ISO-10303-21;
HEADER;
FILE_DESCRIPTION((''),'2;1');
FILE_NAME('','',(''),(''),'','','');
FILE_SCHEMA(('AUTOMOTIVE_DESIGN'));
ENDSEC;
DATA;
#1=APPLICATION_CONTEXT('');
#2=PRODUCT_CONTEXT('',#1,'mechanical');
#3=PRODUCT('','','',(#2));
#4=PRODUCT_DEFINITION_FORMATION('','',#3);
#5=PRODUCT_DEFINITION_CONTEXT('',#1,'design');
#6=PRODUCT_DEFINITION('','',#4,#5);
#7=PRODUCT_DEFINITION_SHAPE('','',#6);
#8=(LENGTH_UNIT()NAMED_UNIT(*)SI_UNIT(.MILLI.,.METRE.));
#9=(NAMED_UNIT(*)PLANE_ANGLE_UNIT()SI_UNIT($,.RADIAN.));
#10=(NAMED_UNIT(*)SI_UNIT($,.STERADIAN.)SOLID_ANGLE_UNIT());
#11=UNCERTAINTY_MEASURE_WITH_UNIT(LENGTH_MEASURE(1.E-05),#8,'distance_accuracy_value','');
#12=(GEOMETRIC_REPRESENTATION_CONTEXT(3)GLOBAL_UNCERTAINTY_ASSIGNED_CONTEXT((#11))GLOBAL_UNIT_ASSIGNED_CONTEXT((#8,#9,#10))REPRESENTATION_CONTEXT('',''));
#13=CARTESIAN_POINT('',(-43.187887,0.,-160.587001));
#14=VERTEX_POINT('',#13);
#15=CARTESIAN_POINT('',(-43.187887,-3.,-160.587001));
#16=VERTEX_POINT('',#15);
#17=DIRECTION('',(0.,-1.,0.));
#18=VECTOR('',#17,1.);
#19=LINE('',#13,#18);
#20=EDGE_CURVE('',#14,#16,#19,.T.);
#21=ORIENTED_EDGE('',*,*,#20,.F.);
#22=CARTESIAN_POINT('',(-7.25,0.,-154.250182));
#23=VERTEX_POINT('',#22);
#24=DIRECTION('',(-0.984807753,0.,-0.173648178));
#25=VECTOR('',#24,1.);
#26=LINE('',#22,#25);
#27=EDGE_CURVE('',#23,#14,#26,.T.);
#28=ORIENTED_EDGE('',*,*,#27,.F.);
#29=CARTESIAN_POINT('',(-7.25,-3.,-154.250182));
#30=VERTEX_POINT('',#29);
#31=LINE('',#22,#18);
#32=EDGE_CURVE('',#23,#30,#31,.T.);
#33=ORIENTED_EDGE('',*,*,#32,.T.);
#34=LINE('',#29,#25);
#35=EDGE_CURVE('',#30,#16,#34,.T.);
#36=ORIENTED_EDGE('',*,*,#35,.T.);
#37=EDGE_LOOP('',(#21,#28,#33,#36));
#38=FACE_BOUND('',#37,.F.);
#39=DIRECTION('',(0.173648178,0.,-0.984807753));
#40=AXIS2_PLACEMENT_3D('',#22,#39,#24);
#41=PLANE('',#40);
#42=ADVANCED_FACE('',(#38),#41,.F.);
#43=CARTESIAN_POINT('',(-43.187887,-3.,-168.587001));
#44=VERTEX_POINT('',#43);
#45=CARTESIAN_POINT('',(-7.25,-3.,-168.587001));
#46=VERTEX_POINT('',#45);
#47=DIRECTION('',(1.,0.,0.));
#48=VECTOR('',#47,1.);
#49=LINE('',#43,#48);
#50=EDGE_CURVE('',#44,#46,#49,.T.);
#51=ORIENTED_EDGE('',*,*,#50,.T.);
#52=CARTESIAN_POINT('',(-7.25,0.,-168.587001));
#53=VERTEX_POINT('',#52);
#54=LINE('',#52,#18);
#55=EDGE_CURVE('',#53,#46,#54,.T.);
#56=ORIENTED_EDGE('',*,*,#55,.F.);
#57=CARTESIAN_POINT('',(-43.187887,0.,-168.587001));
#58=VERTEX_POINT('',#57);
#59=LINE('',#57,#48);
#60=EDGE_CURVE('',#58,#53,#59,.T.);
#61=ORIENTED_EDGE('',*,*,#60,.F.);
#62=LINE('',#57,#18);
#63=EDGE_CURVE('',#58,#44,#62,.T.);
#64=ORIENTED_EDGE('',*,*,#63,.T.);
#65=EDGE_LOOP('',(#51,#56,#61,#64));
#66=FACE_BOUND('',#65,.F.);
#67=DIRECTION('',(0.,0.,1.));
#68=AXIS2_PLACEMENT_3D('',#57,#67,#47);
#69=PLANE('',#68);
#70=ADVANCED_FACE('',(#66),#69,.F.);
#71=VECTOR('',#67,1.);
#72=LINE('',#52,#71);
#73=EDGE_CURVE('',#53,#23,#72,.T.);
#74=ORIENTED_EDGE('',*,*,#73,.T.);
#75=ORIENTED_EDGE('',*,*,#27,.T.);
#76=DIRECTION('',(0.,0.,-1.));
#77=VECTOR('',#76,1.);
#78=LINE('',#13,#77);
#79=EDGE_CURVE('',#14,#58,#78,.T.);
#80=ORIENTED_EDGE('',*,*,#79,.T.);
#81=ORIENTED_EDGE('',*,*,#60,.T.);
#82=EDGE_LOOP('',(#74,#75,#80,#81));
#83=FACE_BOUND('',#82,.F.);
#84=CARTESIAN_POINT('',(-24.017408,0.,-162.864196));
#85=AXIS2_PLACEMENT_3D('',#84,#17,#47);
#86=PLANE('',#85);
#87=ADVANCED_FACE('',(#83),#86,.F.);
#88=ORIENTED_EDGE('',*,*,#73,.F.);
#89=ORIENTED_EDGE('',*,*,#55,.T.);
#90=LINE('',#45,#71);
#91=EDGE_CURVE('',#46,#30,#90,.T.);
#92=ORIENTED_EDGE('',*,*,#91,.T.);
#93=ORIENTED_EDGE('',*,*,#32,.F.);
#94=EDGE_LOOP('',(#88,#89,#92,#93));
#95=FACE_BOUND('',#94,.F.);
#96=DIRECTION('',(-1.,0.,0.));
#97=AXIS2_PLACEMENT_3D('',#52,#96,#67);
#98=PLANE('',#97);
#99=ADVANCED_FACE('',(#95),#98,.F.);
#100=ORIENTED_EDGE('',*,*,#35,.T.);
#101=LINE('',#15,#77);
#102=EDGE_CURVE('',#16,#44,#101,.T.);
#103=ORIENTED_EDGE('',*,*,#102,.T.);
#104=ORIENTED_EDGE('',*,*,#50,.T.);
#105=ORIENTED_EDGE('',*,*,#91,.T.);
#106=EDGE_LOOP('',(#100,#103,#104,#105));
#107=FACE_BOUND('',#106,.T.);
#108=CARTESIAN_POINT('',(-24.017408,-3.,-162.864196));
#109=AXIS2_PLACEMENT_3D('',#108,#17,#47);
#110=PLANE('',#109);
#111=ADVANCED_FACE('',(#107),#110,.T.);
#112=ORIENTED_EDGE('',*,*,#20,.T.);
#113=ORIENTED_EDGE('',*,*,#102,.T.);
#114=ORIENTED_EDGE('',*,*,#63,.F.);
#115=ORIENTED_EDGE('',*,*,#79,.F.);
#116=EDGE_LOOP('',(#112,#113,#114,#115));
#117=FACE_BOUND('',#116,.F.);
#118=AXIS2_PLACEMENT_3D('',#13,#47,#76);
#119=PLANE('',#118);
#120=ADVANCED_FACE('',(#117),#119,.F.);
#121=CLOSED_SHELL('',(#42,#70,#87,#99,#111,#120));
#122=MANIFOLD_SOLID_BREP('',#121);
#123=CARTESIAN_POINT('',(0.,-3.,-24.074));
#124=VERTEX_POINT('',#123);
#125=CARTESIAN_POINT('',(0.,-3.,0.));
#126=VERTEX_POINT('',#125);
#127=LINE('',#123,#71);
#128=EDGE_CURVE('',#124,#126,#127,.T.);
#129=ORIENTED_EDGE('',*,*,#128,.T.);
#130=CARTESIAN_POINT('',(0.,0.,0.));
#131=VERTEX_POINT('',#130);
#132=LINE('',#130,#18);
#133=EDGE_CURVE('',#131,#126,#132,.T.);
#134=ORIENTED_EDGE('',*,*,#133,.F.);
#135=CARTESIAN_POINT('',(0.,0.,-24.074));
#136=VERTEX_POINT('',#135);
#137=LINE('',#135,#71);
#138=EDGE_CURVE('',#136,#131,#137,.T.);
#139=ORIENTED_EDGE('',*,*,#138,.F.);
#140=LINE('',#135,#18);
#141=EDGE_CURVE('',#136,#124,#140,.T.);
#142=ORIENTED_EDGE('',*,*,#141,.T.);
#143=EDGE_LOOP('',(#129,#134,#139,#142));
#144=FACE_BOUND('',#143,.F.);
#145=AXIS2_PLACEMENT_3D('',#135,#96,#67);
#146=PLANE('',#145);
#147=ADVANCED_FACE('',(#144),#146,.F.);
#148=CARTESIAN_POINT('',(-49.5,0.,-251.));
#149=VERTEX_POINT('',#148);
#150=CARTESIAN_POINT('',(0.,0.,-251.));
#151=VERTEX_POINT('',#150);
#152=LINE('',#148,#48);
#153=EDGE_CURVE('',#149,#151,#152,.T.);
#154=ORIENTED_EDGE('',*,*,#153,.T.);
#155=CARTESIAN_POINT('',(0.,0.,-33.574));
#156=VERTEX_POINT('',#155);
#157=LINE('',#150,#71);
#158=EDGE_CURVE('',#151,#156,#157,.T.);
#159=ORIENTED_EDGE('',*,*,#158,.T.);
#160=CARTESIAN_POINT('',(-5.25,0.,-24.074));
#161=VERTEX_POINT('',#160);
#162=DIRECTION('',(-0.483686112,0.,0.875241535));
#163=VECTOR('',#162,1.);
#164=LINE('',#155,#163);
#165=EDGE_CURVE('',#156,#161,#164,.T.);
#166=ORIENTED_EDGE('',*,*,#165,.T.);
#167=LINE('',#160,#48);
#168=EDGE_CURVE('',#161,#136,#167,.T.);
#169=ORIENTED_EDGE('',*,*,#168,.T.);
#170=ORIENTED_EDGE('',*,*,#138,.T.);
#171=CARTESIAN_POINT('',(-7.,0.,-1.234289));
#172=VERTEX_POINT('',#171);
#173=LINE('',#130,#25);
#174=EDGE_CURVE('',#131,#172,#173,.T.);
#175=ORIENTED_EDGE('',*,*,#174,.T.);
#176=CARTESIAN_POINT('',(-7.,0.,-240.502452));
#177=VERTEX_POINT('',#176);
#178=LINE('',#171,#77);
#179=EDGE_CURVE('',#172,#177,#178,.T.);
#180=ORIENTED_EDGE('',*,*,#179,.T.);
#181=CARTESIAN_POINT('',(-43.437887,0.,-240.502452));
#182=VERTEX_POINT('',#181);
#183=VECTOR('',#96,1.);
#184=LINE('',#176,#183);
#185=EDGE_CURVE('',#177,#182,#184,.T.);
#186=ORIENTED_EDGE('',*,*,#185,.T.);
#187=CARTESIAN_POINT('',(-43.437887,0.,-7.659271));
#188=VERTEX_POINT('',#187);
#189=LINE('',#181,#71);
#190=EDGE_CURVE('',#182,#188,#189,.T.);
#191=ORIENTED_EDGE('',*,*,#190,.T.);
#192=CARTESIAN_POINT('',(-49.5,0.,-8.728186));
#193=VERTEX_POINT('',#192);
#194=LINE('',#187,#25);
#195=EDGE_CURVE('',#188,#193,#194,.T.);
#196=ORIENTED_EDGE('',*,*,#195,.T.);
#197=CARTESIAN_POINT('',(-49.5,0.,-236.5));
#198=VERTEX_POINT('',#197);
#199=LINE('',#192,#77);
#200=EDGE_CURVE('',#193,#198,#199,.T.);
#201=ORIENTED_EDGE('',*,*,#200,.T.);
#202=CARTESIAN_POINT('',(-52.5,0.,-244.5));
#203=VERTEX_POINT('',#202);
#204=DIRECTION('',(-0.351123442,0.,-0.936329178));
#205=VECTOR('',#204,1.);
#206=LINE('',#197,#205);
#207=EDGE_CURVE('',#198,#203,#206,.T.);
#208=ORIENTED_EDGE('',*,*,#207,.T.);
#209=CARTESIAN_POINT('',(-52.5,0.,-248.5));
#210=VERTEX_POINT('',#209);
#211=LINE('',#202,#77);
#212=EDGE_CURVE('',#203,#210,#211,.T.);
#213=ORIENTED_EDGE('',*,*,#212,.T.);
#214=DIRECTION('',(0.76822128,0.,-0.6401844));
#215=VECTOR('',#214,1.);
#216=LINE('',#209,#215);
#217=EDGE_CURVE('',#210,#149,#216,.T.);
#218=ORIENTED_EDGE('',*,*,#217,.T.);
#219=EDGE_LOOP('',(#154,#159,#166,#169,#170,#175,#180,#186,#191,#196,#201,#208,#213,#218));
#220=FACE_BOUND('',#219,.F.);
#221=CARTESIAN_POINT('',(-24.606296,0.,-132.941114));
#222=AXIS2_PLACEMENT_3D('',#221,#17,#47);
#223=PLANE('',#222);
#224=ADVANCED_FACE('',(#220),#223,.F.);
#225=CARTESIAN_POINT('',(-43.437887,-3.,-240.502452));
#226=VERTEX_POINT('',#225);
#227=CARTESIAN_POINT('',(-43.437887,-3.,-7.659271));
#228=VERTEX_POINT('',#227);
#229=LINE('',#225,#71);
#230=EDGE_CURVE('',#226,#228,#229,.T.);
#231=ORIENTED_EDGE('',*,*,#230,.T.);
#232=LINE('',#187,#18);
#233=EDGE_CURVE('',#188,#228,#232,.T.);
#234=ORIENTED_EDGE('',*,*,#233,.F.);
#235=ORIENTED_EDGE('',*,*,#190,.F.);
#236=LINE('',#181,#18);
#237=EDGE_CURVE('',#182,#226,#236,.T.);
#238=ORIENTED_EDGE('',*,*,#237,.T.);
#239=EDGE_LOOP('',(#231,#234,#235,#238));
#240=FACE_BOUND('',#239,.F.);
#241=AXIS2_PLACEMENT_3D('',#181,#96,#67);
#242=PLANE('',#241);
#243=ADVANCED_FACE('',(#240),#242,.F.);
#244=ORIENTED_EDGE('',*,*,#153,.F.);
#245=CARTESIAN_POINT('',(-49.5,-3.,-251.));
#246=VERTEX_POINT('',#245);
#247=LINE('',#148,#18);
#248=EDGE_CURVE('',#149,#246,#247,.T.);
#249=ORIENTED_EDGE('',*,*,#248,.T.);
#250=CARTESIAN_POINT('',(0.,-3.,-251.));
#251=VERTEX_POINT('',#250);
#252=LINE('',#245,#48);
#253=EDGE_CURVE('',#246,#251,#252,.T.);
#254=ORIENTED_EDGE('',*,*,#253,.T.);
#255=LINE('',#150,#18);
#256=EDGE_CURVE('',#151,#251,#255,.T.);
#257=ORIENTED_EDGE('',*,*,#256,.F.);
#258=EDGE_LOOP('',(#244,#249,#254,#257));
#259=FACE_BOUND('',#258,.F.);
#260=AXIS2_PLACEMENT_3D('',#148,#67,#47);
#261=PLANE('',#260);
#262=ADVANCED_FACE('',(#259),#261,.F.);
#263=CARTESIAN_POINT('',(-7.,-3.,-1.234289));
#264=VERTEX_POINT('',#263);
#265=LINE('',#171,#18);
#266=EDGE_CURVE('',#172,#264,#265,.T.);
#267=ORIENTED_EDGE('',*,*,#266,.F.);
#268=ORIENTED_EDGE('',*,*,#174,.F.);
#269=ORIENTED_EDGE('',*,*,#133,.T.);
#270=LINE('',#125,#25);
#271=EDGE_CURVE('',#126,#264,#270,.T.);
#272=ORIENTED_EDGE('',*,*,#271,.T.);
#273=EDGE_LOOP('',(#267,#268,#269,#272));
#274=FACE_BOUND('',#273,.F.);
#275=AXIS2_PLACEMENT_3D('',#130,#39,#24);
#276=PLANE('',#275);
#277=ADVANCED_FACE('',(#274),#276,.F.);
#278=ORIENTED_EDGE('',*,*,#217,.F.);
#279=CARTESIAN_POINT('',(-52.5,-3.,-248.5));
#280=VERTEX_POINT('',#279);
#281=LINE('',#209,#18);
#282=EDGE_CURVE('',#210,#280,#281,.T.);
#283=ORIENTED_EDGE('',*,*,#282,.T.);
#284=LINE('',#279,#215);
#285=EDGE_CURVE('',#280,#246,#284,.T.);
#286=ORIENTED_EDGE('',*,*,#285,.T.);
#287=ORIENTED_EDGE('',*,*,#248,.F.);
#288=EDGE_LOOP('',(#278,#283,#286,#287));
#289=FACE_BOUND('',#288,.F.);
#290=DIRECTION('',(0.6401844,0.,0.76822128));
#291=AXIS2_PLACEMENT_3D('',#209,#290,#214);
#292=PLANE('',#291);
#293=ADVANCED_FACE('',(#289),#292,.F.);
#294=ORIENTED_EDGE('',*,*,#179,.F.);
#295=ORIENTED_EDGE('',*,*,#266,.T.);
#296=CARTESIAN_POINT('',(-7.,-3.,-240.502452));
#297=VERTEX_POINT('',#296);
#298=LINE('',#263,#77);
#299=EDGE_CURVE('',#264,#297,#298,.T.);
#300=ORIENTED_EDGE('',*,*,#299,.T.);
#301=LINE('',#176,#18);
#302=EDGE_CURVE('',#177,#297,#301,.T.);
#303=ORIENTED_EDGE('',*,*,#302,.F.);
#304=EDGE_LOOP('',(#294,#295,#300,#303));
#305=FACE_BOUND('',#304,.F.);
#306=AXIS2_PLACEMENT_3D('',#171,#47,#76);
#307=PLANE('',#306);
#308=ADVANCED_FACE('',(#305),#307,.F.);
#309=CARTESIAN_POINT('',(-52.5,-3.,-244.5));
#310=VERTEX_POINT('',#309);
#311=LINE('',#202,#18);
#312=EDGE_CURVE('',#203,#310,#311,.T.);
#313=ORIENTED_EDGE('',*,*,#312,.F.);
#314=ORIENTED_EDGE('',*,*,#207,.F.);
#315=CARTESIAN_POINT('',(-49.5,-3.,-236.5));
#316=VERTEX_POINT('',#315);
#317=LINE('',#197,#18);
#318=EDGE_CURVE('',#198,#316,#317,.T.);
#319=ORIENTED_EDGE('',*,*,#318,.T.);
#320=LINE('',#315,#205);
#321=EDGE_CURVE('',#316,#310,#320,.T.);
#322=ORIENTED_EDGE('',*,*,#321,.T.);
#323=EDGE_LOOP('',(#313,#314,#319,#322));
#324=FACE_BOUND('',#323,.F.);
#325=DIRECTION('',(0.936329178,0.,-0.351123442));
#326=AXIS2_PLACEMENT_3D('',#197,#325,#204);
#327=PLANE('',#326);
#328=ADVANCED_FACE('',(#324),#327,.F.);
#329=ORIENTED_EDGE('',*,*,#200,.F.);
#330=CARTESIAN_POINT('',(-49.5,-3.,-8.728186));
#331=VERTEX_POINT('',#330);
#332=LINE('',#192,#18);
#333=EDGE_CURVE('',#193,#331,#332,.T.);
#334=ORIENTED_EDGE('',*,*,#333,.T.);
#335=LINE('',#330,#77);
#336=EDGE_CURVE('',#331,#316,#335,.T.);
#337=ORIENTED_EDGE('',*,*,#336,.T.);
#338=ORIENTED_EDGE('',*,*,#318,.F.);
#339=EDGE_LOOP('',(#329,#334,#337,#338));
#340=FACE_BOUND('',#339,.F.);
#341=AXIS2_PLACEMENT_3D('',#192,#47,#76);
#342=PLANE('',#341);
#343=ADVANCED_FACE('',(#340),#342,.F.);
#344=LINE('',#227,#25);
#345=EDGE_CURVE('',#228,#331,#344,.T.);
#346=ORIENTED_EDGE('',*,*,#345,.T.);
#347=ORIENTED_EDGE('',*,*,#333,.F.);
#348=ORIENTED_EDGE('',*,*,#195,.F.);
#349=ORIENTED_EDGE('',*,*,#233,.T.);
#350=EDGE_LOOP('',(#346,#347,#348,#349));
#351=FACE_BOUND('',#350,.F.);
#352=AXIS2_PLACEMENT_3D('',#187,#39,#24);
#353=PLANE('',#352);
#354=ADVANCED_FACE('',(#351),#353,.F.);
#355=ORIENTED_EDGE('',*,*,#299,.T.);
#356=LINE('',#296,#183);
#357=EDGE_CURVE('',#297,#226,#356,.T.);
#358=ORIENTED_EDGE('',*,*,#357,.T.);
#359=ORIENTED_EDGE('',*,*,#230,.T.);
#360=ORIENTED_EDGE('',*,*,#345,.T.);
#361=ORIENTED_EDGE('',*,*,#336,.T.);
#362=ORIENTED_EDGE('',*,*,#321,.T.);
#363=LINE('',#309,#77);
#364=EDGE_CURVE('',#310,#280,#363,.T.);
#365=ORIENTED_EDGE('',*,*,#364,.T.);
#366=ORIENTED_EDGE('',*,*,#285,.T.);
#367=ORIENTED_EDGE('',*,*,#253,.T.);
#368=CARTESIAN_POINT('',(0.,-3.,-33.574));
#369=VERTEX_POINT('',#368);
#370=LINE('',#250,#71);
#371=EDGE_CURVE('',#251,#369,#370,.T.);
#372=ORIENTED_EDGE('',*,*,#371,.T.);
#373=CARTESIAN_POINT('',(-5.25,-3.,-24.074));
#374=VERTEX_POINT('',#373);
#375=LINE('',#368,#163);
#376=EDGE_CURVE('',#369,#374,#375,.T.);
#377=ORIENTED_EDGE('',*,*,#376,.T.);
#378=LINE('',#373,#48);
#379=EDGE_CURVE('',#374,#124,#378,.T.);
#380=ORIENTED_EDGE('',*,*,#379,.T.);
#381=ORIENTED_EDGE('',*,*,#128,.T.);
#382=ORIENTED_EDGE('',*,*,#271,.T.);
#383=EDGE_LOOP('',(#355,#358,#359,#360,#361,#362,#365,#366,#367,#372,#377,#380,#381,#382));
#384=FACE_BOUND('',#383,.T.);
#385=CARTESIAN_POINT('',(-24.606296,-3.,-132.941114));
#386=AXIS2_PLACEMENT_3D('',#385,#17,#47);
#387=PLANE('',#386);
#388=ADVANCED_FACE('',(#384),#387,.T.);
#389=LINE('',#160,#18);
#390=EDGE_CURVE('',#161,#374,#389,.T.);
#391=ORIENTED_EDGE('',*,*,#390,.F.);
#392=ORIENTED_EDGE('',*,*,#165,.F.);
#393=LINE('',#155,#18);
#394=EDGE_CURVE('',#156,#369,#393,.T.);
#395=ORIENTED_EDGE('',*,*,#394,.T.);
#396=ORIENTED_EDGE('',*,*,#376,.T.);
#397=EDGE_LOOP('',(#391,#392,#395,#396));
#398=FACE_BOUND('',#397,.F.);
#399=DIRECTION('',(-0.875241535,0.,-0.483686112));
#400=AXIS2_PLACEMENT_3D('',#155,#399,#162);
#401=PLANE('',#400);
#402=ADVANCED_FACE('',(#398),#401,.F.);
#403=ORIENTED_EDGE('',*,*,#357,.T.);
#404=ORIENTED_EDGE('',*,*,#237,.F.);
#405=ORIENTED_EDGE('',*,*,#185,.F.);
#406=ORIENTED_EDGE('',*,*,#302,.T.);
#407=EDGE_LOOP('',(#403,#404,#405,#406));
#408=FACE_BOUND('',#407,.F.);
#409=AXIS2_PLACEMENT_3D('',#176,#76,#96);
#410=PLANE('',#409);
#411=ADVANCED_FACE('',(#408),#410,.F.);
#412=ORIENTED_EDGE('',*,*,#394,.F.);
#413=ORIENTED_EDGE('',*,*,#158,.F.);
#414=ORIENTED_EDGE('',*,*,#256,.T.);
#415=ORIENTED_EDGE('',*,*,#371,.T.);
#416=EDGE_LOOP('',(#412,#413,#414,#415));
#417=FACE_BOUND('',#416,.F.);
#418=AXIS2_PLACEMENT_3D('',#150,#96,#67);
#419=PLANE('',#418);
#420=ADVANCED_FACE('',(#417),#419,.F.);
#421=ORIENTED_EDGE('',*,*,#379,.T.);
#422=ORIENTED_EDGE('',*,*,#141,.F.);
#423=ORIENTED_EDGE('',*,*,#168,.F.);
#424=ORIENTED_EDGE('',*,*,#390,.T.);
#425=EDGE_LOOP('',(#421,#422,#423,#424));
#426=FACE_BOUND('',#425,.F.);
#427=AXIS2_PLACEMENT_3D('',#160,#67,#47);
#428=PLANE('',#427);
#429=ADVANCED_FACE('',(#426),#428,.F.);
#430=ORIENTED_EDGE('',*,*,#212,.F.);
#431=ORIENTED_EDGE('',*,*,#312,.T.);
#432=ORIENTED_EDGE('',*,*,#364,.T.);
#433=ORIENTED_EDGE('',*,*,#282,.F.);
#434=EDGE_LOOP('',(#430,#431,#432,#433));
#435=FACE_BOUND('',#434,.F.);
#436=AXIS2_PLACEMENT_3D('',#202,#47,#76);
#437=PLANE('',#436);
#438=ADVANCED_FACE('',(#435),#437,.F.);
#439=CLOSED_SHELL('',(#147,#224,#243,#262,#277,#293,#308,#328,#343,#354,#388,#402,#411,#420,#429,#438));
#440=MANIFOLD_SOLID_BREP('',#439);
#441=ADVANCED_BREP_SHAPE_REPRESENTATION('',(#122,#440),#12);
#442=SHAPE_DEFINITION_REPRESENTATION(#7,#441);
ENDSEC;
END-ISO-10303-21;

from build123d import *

# Parameters (mm, degrees)
F1_DEPTH = 3
F2_DEPTH = 3


# Not quite as in the source:
# - a feature names something its author has since deleted; it is built from what else it names


with BuildPart() as f1:
    # F0 (on Front) → F1 (new body)
    with BuildSketch(Plane.XZ):
        Polygon((-43.1878868615, -160.5870006293), (-43.1878868615, -168.5870006293), (-7.25, -168.5870006293), (-7.25, -154.250181546), align=None)
    extrude(amount=F1_DEPTH)


with BuildPart() as f2:
    # F0 (on Front) → F2 (new body)
    with BuildSketch(Plane.XZ):
        Polygon((-49.5, -251), (0, -251), (0, -33.574), (-5.25, -24.074), (0, -24.074), (0, 0), (-7, -1.234288865), (-7, -240.5024516791), (-43.4378868615, -240.5024516791), (-43.4378868615, -7.6592714386), (-49.5, -8.7281855451), (-49.5, -236.5), (-52.5, -244.5), (-52.5, -248.5), align=None)
    extrude(amount=F2_DEPTH)


solid = Compound([f1.part, f2.part])
